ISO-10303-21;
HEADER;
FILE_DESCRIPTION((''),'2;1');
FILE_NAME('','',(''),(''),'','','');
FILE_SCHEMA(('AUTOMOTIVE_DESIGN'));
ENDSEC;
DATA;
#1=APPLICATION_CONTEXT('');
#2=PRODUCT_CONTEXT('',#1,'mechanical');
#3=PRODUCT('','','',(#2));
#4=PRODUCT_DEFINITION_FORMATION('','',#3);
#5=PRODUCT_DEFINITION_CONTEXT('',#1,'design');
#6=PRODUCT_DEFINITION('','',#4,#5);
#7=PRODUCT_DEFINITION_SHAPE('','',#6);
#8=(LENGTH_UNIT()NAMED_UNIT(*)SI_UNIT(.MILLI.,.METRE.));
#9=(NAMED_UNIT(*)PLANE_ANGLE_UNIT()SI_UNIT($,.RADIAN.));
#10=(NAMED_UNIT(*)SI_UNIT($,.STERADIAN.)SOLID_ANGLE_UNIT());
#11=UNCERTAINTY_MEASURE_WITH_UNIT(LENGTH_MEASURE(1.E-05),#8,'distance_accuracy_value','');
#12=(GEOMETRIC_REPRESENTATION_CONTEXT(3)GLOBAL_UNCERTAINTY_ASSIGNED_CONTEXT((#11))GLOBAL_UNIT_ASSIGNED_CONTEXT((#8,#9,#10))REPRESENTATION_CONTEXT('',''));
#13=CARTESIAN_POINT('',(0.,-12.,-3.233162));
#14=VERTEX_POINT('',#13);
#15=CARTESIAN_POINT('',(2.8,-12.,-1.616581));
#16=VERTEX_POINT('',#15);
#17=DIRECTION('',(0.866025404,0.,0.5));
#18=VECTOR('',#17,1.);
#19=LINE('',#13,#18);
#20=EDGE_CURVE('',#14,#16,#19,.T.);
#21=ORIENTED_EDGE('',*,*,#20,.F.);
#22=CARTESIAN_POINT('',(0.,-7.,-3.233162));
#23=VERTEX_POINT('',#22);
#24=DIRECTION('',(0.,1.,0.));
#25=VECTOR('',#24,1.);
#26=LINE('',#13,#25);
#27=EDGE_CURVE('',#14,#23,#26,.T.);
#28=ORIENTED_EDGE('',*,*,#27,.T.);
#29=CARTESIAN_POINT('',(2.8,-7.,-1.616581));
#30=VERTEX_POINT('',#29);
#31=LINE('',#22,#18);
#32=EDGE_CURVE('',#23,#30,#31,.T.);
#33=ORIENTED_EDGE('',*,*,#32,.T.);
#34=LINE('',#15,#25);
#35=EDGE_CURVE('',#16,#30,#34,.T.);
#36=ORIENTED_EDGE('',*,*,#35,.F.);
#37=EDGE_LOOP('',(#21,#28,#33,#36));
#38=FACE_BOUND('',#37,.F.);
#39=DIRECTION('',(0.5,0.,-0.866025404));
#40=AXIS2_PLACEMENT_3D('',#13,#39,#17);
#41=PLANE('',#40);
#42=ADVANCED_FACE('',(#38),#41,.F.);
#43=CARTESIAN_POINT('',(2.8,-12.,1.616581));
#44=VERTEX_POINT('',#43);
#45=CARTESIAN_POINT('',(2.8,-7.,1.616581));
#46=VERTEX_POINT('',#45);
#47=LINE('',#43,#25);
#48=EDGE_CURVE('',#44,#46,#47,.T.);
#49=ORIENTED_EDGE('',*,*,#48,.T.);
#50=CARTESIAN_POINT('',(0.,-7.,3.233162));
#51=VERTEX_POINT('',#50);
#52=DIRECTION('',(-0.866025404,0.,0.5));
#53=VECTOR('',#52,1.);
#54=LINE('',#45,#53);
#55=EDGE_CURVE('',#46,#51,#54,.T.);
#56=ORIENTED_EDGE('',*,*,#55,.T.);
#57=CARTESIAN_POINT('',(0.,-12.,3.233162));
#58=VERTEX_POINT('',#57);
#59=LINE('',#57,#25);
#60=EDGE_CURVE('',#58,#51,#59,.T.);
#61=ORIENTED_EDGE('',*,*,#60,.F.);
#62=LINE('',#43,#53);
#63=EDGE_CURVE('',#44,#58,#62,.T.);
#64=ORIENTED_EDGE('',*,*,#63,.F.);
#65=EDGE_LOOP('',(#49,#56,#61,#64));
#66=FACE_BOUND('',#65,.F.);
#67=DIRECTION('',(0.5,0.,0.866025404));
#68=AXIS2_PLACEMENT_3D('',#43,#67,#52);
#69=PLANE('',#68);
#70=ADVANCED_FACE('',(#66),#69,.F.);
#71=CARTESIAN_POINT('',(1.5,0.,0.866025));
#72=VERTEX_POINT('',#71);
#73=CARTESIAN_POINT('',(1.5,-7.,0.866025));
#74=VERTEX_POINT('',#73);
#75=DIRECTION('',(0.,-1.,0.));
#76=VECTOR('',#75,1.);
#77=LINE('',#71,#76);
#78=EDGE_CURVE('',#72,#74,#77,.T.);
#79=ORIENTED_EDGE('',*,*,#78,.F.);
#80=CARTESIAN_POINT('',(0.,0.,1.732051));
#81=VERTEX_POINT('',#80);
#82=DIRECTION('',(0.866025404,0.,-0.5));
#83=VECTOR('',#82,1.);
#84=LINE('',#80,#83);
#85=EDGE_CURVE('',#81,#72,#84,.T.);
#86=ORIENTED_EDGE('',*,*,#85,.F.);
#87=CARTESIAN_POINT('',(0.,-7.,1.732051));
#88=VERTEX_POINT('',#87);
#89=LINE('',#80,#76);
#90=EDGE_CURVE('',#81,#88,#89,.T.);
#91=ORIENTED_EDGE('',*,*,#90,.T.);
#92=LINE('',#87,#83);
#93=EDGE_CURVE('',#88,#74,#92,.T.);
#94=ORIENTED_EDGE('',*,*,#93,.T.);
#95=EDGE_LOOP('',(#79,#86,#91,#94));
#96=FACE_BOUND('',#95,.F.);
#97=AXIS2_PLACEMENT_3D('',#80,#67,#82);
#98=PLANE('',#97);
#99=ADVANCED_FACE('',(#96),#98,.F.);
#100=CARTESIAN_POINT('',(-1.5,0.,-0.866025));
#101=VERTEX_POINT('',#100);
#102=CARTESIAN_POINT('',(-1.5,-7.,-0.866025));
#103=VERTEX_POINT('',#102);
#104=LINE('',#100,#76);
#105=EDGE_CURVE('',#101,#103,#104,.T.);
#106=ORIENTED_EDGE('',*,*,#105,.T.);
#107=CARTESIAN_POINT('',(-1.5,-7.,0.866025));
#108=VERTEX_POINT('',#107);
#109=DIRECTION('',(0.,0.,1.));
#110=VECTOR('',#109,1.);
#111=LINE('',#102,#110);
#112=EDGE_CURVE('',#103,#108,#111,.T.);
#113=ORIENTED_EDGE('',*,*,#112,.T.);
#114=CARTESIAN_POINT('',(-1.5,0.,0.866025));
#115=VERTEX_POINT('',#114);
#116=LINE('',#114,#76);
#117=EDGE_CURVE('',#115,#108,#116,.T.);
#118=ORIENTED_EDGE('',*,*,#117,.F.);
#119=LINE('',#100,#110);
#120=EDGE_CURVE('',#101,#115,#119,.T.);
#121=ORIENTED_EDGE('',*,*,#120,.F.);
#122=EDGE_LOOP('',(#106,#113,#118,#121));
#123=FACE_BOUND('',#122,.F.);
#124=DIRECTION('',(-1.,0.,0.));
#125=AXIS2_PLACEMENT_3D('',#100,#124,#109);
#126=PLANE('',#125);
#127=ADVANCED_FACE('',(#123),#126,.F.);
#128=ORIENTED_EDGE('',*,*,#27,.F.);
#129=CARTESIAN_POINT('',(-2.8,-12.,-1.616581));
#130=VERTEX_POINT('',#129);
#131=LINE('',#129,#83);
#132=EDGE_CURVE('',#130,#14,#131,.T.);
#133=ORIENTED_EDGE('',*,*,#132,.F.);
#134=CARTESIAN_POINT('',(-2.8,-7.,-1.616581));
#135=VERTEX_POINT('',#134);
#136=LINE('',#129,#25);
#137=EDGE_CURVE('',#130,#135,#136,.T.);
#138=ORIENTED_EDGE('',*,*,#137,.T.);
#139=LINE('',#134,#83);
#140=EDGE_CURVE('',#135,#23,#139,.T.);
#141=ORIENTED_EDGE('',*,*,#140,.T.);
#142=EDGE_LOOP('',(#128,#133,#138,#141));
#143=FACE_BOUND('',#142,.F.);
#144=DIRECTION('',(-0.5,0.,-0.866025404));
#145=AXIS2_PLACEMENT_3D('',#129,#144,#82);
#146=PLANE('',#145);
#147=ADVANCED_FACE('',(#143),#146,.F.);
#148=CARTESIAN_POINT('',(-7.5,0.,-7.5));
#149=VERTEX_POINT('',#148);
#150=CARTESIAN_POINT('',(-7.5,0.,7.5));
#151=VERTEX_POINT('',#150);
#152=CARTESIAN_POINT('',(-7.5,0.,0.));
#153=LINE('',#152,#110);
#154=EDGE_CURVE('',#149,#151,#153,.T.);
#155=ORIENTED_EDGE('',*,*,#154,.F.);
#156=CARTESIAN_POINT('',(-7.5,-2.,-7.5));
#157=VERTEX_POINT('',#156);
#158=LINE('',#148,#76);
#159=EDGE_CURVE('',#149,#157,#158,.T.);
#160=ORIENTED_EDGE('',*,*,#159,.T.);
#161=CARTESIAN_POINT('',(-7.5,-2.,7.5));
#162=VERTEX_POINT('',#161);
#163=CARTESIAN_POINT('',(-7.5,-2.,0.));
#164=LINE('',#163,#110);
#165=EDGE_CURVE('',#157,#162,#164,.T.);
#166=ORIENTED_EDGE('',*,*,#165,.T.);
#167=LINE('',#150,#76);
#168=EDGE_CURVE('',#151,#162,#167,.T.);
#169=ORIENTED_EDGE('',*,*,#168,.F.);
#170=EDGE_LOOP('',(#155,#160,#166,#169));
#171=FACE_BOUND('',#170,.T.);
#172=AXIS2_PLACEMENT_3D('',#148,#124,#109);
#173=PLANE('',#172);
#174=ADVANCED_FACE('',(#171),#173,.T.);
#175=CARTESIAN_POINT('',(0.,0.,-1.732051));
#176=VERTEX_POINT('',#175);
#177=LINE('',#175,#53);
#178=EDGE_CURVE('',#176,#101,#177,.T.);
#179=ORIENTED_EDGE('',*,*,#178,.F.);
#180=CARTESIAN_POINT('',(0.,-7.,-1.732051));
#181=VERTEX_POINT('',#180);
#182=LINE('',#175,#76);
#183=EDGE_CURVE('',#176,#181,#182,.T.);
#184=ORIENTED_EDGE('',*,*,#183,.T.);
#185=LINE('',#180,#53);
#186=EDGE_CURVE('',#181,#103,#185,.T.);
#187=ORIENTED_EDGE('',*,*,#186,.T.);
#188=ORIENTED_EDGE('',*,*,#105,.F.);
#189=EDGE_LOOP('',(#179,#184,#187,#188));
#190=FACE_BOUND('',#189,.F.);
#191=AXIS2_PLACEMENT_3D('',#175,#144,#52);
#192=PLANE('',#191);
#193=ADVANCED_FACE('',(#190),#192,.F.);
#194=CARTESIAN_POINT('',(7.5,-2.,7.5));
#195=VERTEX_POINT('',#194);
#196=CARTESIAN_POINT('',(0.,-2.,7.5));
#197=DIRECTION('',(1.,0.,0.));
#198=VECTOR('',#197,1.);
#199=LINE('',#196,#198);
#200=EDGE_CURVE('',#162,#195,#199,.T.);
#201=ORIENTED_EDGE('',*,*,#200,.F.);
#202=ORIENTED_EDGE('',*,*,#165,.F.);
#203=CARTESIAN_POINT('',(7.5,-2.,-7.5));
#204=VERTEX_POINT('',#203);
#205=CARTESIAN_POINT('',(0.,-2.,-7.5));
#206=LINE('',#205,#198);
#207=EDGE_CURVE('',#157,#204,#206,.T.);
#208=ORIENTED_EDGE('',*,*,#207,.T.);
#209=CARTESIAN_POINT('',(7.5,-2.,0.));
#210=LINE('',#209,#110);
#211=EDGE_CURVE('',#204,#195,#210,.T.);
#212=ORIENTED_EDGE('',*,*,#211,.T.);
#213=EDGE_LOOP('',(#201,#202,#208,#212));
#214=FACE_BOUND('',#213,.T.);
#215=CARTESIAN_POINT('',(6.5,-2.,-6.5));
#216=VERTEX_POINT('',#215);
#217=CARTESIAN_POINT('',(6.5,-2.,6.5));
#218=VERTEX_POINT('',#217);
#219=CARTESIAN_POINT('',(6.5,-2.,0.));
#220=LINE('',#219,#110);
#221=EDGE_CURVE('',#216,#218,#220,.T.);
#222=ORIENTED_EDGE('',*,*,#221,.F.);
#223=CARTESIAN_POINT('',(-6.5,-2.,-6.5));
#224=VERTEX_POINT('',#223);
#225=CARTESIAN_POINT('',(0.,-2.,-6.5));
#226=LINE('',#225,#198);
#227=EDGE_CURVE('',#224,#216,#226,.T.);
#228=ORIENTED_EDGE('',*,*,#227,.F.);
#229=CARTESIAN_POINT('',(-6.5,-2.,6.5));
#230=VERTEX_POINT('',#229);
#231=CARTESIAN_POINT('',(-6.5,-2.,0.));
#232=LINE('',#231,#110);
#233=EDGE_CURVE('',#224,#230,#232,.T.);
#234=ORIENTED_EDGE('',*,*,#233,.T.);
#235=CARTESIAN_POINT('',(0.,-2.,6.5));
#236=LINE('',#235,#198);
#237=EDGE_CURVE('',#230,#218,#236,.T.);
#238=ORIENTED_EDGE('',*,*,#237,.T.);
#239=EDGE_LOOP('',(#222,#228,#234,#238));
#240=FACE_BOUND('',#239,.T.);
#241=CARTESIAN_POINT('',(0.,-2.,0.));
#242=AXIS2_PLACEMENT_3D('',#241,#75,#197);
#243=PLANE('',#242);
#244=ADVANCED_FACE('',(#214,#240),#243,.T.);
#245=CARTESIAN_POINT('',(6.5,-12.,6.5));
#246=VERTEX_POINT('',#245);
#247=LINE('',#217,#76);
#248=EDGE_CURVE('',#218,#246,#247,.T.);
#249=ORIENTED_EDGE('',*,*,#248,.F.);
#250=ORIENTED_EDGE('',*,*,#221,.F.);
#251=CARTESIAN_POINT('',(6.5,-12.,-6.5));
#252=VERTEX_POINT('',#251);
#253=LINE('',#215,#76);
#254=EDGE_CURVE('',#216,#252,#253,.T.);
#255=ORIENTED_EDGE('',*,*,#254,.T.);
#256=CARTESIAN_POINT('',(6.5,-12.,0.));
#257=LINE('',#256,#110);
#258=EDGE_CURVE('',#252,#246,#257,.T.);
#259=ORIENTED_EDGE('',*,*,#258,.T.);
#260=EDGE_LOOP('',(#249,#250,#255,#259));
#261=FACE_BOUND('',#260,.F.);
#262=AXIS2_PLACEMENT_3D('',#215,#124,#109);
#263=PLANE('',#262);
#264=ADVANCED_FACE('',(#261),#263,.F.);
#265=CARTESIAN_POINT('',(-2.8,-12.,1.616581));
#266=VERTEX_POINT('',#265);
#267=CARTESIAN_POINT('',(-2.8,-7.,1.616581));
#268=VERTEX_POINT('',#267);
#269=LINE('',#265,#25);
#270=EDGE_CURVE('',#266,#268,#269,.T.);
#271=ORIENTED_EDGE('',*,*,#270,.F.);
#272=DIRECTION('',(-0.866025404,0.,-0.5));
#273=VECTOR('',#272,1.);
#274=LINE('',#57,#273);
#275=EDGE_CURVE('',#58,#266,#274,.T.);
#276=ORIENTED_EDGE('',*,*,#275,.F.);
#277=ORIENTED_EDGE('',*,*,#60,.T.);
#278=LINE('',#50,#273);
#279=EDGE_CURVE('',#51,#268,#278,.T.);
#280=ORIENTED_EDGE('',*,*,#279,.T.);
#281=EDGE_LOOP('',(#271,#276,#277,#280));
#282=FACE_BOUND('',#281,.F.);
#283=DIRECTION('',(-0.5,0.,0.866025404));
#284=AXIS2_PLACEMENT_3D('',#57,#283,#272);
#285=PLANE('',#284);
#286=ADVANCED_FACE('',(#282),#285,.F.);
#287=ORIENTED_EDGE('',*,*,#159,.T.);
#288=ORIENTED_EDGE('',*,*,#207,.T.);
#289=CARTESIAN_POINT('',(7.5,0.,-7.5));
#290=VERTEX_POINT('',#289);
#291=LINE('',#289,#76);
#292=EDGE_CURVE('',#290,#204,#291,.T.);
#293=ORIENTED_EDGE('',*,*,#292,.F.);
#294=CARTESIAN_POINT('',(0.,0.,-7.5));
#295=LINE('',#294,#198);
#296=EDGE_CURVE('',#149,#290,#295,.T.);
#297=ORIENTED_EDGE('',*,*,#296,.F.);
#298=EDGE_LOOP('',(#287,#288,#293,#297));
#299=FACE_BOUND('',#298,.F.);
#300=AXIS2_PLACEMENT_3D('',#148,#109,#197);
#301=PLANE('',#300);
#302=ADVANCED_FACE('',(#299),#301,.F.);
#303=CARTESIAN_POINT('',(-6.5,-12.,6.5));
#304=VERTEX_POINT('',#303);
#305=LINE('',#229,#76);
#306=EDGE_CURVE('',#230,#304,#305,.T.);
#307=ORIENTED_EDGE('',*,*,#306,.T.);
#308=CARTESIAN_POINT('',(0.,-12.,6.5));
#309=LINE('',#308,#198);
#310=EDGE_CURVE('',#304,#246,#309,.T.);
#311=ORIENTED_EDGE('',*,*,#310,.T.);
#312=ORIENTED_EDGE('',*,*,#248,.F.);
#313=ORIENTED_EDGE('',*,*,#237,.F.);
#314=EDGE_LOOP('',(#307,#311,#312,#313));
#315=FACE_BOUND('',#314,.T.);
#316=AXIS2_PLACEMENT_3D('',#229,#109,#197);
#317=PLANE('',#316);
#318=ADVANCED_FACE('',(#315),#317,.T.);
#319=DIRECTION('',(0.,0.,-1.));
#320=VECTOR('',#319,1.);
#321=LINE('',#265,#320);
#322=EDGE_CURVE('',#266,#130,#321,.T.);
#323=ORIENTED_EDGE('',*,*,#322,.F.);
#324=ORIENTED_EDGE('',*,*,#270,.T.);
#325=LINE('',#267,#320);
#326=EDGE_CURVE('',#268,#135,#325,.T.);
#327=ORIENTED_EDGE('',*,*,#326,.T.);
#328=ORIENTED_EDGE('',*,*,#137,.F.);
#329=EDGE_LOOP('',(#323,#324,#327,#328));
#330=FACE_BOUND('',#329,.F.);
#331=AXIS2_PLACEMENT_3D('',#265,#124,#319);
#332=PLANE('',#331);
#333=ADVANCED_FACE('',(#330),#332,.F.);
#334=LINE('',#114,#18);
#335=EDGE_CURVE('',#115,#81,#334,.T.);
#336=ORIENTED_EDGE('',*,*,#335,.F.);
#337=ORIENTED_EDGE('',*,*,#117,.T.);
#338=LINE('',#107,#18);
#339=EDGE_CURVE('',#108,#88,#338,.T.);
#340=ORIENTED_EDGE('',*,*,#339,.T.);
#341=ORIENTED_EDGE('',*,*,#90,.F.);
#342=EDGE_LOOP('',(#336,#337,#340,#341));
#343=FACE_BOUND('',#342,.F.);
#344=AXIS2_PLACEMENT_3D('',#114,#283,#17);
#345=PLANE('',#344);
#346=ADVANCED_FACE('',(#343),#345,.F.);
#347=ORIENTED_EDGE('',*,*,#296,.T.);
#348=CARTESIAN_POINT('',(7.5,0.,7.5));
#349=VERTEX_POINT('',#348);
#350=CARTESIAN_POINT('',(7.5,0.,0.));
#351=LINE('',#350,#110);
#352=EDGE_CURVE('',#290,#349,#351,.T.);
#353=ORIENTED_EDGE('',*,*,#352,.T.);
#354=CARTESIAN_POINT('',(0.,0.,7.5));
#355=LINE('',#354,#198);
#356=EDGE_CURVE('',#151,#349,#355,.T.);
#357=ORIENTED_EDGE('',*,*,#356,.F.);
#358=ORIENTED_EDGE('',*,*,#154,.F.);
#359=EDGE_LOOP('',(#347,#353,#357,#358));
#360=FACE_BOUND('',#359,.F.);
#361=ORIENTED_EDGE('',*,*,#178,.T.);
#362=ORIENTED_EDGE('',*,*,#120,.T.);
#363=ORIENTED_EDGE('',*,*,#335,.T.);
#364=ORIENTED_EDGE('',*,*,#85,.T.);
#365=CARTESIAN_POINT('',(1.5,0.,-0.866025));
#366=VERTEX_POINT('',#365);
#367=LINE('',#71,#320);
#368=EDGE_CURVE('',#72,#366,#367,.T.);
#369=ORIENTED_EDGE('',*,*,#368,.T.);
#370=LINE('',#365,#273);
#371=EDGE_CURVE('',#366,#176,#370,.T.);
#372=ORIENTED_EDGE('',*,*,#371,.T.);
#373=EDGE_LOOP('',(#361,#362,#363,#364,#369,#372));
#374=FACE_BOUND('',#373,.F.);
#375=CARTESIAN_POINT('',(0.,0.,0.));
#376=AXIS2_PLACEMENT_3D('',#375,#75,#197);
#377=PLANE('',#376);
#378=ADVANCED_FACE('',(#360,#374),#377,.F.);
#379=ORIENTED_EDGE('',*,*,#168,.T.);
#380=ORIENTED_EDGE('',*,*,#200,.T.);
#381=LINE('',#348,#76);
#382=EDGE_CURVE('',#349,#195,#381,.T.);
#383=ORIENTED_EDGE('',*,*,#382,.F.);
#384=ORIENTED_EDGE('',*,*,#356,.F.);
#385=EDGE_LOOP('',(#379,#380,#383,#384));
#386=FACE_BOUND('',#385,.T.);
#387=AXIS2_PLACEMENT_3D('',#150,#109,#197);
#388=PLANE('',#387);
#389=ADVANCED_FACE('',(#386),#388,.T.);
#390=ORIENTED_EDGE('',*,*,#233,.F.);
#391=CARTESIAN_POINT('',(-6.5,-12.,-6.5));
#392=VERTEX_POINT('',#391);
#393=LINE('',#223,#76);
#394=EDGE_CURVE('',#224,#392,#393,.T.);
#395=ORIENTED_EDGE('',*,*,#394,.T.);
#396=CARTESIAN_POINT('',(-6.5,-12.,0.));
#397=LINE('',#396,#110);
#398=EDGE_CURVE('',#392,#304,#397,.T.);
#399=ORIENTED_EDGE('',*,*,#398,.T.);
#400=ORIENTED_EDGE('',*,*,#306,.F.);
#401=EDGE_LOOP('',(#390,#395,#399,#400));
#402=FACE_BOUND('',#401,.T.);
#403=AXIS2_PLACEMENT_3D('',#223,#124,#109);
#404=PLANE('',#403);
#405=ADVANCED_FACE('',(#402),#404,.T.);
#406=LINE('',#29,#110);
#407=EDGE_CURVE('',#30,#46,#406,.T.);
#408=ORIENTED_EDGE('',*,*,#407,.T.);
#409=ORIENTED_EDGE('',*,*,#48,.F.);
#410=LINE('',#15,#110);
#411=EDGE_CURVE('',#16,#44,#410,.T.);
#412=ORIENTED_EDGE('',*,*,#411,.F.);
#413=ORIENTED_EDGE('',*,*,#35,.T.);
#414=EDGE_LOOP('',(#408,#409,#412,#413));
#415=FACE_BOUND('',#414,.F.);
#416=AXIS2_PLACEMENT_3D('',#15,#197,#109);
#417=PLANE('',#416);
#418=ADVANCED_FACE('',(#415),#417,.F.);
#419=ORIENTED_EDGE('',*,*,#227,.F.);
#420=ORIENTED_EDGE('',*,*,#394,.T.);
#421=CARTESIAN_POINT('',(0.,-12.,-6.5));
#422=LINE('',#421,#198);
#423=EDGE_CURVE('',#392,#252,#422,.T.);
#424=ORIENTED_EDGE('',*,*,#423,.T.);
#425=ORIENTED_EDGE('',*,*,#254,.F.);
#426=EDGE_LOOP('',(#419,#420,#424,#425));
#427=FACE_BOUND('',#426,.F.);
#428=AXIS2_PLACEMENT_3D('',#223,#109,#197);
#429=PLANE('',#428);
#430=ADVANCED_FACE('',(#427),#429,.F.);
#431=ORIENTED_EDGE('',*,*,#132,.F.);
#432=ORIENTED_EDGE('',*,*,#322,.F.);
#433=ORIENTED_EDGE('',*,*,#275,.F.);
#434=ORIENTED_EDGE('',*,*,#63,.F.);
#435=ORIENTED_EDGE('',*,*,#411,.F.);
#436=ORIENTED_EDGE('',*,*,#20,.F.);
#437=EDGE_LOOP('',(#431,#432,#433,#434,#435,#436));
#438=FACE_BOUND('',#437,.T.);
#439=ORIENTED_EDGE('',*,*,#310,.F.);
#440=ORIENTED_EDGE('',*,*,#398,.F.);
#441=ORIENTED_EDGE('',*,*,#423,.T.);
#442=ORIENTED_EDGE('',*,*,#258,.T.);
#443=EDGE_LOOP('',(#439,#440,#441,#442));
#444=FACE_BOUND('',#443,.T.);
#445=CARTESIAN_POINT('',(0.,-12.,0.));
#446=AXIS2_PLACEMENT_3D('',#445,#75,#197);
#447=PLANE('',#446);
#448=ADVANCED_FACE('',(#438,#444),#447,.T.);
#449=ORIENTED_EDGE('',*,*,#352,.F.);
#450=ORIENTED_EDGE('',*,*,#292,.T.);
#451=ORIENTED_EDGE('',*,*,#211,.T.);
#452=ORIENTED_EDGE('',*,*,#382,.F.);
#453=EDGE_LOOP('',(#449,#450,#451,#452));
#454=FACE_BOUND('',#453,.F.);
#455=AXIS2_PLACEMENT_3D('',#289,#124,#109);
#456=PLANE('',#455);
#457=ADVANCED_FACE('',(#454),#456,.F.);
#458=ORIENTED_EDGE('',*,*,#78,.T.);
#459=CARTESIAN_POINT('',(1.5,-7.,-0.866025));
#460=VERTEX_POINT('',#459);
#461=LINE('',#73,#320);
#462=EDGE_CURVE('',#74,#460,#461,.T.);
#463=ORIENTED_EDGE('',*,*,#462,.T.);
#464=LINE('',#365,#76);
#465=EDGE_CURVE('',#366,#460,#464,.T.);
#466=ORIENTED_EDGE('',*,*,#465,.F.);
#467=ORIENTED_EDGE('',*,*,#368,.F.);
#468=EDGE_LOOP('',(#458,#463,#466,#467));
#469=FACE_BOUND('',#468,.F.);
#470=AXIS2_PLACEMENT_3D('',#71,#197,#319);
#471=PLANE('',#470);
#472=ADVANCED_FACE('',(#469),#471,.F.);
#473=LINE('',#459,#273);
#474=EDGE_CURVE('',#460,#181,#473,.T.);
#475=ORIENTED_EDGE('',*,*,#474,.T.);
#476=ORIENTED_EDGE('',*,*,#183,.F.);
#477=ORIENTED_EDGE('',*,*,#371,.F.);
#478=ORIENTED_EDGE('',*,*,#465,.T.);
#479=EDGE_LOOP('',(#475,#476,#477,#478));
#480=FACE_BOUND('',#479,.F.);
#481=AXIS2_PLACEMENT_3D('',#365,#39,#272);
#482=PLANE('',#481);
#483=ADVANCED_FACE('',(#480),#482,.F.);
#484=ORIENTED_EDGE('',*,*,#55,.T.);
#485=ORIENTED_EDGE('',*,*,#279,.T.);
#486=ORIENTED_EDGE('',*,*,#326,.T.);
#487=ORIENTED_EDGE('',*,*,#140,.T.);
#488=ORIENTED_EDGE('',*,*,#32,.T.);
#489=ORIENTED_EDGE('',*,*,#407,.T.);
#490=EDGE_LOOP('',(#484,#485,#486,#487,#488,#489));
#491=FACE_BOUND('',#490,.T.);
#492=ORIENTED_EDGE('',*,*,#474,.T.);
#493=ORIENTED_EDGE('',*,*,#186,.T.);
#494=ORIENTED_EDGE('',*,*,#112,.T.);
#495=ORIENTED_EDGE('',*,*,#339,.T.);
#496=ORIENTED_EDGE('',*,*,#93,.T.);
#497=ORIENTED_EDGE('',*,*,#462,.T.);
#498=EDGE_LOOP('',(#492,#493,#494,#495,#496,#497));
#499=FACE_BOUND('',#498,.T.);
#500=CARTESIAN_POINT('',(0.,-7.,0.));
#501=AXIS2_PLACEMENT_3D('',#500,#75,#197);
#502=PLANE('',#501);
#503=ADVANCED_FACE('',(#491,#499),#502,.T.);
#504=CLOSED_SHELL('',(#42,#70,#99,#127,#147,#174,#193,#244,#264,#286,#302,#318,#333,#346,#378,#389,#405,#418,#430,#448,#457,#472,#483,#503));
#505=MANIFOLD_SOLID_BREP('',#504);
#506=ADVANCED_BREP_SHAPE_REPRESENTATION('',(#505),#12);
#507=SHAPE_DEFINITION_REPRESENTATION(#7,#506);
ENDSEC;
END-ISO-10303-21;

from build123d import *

# Parameters (mm, degrees)
F0_W     = 15
F0_H     = 15
F1_DEPTH = 2
F2_W     = 13
F2_H     = 13
F3_DEPTH = 10
F5_DEPTH = 12
F7_DEPTH = 5


# Not quite as in the source:
# - a feature names something its author has since deleted; it is built from what else it names


with BuildPart() as f1:
    # F0 (on Front) → F1 (new body)
    with BuildSketch(Plane.XZ):
        Rectangle(F0_W, F0_H)
    extrude(amount=F1_DEPTH)

    # F2 (on face) → F3 (join)
    with BuildSketch(Plane.XZ.offset(2)):
        Rectangle(F2_W, F2_H)
    extrude(amount=F3_DEPTH)

    # F4 (on face) → F5 (cut, through all)
    with BuildSketch(Plane(origin=(0, 0, 0), x_dir=(-1, 0, 0), z_dir=(0, 1, 0))):
        Polygon((1.5, -0.8660254038), (1.5, 0.8660254038), (0, 1.7320508076), (-1.5, 0.8660254038), (-1.5, -0.8660254038), (0, -1.7320508076), align=None)
    extrude(amount=-F5_DEPTH, mode=Mode.SUBTRACT)

    # F6 (on face) → F7 (cut)
    with BuildSketch(Plane.XZ.offset(12)):
        Polygon((-2.8, 1.6165807537), (-2.8, -1.6165807537), (0, -3.2331615075), (2.8, -1.6165807537), (2.8, 1.6165807537), (0, 3.2331615075), align=None)
        Polygon((1.5, 0.8660254038), (1.5, -0.8660254038), (0, -1.7320508076), (-1.5, -0.8660254038), (-1.5, 0.8660254038), (0, 1.7320508076), align=None, mode=Mode.SUBTRACT)
    extrude(amount=-F7_DEPTH, mode=Mode.SUBTRACT)


solid = f1.part
